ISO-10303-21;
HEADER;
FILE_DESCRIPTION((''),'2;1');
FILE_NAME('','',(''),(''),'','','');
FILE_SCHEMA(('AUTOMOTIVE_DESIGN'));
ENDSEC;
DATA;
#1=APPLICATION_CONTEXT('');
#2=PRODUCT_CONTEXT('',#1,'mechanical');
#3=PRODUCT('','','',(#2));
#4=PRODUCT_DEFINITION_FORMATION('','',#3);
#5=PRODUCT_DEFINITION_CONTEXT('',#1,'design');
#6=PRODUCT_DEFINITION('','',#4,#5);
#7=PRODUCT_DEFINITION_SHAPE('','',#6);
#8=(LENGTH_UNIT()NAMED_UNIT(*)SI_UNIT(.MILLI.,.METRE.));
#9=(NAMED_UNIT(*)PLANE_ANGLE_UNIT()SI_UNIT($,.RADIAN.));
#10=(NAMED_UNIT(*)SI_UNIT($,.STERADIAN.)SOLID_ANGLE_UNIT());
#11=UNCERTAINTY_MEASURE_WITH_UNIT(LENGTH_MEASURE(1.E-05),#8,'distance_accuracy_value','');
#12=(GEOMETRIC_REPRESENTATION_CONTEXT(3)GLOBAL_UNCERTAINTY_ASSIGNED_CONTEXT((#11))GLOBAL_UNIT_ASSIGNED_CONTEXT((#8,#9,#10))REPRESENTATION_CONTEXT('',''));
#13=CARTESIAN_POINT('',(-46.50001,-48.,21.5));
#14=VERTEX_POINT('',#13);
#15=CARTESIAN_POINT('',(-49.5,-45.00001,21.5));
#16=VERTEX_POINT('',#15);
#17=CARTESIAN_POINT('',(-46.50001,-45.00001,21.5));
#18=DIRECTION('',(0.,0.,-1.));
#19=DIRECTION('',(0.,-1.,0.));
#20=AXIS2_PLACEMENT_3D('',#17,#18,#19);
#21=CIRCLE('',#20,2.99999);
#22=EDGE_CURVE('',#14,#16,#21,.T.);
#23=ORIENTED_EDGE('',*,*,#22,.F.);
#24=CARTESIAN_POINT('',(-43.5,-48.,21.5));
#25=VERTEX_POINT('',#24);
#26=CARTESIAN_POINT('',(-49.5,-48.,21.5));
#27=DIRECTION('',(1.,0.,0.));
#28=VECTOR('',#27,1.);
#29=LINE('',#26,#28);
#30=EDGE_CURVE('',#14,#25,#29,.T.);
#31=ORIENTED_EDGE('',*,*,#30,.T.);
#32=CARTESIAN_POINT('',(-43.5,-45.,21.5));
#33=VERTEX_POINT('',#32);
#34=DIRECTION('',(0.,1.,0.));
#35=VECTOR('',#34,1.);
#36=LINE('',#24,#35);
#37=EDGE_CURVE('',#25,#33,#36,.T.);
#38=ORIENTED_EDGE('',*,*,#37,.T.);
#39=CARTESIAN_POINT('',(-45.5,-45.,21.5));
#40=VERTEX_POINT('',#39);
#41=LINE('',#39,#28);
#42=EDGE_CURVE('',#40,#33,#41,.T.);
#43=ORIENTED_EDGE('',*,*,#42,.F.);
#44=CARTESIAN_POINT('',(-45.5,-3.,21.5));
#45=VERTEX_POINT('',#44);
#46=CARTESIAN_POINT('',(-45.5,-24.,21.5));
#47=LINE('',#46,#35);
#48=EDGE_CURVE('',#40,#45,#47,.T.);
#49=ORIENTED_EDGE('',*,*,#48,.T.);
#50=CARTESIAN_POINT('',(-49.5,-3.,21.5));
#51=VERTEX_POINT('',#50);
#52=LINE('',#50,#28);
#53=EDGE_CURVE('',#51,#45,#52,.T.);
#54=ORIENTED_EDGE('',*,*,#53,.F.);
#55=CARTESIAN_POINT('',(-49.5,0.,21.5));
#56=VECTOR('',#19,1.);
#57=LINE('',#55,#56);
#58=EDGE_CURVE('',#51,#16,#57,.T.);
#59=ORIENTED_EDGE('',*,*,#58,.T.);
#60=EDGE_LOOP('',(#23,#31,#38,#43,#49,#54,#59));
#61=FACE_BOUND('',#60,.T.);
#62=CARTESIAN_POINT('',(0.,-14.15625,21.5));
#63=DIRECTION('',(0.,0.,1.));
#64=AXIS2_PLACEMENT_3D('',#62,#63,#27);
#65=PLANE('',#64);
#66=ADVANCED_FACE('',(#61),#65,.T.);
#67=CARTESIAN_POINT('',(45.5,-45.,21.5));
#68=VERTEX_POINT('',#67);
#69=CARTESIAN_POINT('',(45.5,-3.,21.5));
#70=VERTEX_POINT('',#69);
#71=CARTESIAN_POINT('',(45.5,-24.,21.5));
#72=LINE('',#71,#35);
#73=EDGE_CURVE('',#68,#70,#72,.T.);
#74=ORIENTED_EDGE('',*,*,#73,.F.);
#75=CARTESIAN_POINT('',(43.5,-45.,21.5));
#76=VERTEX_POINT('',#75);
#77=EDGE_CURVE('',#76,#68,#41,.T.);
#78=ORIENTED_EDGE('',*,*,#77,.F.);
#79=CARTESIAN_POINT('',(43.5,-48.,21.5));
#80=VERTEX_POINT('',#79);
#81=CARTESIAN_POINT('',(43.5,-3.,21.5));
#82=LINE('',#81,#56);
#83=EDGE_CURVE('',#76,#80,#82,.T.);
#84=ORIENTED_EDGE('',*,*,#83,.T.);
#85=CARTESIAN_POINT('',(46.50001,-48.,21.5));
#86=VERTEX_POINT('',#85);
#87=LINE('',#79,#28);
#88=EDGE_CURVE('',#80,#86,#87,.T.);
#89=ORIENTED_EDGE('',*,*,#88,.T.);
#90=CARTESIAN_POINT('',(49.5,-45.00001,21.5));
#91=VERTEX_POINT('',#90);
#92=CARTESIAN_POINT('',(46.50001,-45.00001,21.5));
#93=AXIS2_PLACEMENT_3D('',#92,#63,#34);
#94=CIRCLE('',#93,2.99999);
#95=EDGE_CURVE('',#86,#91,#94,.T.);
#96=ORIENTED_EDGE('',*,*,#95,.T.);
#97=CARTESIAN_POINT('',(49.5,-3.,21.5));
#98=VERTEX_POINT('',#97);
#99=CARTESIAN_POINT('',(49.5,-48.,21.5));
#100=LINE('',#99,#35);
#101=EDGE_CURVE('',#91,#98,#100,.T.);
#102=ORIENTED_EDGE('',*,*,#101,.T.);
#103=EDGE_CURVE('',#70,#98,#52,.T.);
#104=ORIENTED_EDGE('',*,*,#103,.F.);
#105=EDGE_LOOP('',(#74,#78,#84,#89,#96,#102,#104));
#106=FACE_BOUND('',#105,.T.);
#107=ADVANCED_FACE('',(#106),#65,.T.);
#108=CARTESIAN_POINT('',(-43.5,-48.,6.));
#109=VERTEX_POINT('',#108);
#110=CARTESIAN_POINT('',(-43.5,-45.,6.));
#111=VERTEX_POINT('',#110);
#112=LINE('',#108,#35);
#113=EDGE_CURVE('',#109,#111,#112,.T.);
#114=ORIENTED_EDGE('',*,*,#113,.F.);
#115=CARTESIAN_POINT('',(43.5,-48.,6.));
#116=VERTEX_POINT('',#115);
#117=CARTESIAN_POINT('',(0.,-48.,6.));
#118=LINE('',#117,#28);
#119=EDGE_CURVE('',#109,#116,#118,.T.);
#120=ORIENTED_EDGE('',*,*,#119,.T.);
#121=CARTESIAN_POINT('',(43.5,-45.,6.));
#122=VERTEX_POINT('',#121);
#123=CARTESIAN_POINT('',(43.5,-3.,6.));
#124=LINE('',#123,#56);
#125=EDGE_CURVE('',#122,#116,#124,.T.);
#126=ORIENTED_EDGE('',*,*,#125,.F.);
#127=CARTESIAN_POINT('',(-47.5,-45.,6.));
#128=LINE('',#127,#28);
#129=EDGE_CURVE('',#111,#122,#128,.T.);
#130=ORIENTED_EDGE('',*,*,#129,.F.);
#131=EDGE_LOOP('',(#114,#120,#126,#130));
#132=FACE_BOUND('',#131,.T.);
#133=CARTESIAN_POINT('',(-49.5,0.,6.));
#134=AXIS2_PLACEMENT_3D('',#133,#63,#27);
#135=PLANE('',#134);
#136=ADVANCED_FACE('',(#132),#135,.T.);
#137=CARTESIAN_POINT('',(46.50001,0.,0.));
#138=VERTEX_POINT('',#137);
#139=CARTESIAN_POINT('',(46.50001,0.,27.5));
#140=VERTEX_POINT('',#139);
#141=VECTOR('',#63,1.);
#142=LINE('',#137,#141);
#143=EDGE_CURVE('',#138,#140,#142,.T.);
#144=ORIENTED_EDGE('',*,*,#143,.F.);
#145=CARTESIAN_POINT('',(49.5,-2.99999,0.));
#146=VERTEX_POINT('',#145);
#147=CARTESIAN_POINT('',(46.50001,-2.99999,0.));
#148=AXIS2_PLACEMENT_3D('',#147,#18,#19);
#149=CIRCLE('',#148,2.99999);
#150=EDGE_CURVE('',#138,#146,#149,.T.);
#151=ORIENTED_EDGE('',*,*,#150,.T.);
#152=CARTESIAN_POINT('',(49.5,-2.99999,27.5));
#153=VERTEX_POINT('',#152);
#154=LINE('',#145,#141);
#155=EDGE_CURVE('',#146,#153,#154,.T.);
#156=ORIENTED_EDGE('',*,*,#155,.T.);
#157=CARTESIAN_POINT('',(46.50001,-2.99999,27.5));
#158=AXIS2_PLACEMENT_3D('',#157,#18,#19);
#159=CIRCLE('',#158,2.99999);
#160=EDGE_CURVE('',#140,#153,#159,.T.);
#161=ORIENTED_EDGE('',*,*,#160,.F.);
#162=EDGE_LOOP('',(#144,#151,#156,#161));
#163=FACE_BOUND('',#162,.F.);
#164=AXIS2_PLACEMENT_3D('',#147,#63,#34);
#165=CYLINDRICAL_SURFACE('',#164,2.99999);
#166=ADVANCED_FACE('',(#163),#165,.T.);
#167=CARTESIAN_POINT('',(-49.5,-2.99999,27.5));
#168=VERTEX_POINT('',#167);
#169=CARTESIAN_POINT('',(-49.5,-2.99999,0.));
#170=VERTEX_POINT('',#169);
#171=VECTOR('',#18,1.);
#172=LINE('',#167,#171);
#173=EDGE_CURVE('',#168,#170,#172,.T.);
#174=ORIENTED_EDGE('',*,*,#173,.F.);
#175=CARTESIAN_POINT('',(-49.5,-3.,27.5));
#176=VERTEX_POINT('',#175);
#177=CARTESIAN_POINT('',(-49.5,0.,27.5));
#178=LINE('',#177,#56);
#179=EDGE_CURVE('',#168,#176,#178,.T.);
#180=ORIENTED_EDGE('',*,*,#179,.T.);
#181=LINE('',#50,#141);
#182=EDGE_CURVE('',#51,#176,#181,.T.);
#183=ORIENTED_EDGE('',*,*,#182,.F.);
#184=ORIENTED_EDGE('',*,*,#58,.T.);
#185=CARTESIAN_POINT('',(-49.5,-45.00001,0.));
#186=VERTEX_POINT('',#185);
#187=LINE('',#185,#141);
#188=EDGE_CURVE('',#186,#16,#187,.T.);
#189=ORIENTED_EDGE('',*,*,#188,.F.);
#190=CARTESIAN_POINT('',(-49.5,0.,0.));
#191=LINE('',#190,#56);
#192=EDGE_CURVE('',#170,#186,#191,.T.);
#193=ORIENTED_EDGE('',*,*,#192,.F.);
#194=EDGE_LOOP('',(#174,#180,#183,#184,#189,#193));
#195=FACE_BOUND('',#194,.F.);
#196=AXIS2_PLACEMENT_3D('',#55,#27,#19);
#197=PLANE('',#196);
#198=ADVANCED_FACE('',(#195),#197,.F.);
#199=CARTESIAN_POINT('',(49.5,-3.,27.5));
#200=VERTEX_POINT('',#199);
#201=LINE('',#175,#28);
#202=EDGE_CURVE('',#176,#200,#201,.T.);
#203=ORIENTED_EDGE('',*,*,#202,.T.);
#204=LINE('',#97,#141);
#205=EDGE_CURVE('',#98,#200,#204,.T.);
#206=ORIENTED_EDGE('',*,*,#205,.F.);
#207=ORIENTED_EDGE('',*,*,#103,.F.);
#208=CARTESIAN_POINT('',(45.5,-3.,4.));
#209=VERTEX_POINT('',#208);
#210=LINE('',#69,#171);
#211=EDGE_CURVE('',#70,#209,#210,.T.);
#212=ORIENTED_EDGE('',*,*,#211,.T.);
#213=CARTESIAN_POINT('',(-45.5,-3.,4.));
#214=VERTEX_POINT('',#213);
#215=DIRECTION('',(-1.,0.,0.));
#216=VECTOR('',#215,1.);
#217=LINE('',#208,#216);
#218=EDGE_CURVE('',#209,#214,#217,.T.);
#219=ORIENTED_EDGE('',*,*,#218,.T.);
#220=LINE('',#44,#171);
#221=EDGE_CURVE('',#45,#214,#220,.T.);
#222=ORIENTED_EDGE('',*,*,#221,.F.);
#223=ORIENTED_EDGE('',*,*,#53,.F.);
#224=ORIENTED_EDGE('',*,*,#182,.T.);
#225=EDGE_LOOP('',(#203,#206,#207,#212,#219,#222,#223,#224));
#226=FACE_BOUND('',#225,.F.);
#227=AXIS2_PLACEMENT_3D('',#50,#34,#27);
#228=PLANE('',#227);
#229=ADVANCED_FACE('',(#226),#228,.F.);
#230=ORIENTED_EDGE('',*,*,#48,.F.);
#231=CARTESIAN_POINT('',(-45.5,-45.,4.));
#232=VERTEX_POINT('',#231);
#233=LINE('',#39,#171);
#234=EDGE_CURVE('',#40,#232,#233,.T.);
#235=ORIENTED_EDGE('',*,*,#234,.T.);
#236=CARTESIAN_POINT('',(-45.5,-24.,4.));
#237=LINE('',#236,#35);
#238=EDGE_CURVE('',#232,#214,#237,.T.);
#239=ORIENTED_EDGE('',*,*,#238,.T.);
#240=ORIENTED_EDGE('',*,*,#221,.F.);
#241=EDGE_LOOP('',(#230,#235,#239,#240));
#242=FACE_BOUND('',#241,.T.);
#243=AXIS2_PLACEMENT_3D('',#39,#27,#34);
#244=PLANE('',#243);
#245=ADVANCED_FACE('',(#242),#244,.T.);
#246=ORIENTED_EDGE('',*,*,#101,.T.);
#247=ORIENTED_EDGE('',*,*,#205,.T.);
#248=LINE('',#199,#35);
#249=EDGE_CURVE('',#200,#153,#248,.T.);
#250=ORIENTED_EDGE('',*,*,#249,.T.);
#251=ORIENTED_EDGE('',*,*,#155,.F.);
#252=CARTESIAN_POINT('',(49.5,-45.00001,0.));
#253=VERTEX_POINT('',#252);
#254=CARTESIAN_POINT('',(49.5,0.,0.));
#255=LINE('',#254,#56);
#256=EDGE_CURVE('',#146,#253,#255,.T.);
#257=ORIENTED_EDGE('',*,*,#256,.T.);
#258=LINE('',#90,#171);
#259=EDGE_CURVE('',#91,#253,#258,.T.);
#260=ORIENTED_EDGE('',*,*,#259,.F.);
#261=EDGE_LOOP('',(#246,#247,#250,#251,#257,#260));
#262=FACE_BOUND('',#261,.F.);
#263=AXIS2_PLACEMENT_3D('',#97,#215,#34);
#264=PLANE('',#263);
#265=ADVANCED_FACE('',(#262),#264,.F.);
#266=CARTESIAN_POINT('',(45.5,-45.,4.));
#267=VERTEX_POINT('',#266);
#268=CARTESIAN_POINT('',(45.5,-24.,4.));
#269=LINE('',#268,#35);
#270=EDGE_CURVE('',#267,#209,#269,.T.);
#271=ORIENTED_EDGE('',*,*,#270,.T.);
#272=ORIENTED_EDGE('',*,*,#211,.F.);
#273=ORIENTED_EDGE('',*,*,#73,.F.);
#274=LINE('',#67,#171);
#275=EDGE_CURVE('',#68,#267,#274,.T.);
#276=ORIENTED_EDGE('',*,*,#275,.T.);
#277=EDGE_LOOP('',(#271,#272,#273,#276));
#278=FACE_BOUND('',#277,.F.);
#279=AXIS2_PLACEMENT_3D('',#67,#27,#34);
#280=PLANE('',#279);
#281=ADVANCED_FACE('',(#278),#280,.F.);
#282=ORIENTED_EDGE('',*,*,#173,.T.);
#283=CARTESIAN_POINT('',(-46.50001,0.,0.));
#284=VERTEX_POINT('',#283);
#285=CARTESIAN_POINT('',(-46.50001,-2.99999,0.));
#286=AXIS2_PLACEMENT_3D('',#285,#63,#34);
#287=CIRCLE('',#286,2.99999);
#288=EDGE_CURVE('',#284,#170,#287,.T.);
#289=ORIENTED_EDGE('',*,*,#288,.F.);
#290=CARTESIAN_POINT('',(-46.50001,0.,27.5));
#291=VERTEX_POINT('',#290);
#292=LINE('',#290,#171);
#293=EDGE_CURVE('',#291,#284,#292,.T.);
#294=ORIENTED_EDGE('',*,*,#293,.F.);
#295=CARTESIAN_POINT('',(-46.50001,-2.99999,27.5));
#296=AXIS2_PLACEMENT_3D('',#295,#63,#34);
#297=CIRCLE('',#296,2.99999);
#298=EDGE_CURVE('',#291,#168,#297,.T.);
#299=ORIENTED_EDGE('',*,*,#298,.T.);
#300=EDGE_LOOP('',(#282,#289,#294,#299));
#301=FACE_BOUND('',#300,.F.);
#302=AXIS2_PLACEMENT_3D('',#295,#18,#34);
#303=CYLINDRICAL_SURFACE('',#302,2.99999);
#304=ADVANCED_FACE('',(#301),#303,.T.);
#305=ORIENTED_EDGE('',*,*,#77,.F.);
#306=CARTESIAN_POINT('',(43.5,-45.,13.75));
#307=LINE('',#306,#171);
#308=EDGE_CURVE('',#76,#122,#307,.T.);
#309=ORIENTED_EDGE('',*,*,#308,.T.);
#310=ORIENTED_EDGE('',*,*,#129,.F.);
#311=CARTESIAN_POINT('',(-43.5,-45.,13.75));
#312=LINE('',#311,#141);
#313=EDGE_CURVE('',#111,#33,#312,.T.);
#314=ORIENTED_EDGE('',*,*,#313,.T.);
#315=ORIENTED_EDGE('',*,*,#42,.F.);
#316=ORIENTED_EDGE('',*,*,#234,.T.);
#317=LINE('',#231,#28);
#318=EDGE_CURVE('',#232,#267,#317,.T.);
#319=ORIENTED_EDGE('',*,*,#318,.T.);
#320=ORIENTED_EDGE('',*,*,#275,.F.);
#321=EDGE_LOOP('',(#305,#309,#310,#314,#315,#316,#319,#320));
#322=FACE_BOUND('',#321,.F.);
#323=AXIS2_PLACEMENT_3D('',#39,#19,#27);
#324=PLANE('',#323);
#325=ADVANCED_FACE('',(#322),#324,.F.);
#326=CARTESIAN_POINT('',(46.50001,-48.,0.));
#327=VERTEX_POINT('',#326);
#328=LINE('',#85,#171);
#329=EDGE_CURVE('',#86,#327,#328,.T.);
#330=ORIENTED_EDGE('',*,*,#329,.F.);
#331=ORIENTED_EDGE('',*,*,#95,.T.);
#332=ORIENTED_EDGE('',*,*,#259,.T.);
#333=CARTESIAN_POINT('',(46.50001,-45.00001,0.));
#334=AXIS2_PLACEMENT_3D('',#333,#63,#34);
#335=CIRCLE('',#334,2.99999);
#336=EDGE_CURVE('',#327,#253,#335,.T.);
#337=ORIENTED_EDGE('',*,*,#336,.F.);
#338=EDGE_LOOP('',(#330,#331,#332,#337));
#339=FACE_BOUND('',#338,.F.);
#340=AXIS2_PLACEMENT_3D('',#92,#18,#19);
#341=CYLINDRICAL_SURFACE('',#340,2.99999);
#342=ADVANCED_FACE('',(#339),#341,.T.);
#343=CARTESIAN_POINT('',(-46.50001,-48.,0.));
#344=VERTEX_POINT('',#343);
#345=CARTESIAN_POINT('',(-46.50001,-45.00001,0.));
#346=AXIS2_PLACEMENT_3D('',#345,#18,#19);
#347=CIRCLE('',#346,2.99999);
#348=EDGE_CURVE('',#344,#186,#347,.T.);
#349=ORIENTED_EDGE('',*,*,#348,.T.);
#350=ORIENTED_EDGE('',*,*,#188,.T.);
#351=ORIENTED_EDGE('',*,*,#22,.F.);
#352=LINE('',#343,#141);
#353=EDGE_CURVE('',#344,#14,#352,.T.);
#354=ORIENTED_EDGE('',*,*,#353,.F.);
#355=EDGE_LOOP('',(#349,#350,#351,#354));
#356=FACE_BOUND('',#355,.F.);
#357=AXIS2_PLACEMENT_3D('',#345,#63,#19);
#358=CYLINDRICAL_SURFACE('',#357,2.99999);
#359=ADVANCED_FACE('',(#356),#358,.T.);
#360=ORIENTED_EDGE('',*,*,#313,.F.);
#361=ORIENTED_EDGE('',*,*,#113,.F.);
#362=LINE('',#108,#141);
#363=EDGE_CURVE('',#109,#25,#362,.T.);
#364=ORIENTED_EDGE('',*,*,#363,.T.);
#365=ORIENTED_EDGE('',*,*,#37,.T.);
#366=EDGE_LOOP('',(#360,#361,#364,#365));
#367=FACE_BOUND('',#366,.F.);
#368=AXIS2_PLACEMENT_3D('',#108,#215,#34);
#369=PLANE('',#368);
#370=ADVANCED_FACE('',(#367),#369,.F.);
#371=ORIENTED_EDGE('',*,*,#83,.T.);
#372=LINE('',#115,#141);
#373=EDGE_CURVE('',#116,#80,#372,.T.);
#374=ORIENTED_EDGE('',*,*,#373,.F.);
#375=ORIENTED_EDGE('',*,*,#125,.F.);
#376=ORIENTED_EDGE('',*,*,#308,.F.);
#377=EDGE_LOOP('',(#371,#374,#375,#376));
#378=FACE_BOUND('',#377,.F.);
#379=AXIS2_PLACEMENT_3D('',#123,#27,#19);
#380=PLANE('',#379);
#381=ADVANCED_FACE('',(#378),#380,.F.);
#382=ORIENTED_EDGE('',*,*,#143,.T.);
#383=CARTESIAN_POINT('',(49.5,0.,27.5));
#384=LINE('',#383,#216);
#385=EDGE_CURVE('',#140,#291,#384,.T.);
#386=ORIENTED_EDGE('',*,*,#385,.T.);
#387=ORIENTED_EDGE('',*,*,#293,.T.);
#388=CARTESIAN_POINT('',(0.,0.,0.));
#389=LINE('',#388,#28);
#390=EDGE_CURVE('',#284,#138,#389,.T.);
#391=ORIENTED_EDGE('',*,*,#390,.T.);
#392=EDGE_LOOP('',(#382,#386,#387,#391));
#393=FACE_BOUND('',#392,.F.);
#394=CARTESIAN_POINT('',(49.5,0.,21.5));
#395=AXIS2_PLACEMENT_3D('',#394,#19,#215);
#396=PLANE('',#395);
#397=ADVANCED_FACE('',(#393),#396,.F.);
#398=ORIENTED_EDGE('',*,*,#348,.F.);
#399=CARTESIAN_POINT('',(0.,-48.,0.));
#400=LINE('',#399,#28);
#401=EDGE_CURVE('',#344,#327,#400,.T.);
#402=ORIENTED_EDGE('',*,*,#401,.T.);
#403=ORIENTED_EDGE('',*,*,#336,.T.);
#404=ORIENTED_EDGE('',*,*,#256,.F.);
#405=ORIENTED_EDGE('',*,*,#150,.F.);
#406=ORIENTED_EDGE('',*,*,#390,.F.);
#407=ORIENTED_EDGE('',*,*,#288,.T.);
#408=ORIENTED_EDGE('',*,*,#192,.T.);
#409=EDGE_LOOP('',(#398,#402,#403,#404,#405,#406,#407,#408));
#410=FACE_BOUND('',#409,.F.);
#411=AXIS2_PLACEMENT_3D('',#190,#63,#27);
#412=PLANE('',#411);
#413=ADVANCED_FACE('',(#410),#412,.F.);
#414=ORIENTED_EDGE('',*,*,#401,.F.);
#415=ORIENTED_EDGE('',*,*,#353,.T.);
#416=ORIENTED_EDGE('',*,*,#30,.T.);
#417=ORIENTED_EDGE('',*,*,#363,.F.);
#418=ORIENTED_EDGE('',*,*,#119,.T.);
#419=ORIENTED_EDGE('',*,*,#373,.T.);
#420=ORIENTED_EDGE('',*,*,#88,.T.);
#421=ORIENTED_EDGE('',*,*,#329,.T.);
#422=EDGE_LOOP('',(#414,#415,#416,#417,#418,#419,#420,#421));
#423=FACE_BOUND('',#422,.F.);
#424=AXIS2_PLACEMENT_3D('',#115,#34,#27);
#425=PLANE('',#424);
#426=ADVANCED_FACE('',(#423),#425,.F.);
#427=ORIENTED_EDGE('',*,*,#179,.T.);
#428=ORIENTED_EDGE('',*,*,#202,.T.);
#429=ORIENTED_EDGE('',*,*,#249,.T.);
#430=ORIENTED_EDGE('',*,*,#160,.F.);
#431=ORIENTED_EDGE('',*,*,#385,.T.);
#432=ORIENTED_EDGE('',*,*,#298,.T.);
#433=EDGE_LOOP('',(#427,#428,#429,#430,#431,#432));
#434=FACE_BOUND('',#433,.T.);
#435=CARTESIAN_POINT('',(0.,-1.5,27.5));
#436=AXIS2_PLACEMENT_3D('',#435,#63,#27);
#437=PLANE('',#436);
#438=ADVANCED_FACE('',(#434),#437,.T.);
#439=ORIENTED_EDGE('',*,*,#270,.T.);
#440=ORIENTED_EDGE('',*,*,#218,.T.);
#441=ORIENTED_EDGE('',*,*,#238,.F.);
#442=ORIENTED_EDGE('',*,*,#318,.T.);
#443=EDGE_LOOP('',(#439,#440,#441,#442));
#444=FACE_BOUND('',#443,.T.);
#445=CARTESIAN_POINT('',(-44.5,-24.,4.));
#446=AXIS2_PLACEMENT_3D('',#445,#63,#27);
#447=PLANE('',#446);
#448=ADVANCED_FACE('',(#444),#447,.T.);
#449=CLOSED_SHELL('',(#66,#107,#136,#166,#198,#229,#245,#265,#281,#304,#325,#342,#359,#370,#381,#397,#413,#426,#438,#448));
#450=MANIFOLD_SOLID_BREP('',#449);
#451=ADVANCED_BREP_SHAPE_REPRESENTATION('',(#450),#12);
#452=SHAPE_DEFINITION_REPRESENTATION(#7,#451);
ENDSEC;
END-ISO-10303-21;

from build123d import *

# Parameters (mm, degrees)
F0_W     = 99
F0_H     = 6
F1_DEPTH = 48
F3_DEPTH = 15.5
F4_W     = 2
F4_H     = 42
F4_W_2   = 87
F5_DEPTH = 17.5
F6_DEPTH = 6
F7_R     = 2.99999


# Not quite as in the source:
# - a fillet or chamfer is up to 0.001 mm smaller than in the source, because OpenCascade refuses the exact size


with BuildPart() as f1:
    # F0 (on Front) → F1 (new body)
    with BuildSketch(Plane.XZ):
        with Locations((0, 3)):
            Rectangle(F0_W, F0_H)
    extrude(amount=F1_DEPTH)

    # F2 (on face) → F3 (join)
    with BuildSketch(Plane.XY.offset(6)):
        Polygon((49.5, -3), (49.5, 0), (43.5, 0), (-43.5, 0), (-49.5, 0), (-49.5, -3), (-49.5, -48), (-43.5, -48), (-43.5, -3), (43.5, -3), (43.5, -48), (49.5, -48), align=None)
    extrude(amount=F3_DEPTH)

    # F4 (on face) → F5 (cut)
    with BuildSketch(Plane.XY.offset(21.5)):
        with Locations((-44.5, -24)):
            Rectangle(F4_W, F4_H)
        with Locations((0, -24)):
            Rectangle(F4_W_2, F4_H)
        with Locations((44.5, -24)):
            Rectangle(F4_W, F4_H)
    extrude(amount=-F5_DEPTH, mode=Mode.SUBTRACT)

    # F4 (on face) → F6 (join)
    with BuildSketch(Plane.XY.offset(21.5)):
        Polygon((-49.5, -3), (-45.5, -3), (-43.5, -3), (43.5, -3), (45.5, -3), (49.5, -3), (49.5, 0), (-49.5, 0), align=None)
    extrude(amount=F6_DEPTH)

    # F7 (radius 3 in the source; OpenCascade refuses exactly that, so slightly less here)
    f7_edges = [f1.edges().sort_by_distance(p)[0] for p in [
        (-49.5, -48, 10.75),
        (49.5, -48, 10.75),
        (49.5, 0, 13.75),
        (-49.5, 0, 13.75),
    ]]
    fillet(f7_edges, radius=F7_R)


solid = f1.part
